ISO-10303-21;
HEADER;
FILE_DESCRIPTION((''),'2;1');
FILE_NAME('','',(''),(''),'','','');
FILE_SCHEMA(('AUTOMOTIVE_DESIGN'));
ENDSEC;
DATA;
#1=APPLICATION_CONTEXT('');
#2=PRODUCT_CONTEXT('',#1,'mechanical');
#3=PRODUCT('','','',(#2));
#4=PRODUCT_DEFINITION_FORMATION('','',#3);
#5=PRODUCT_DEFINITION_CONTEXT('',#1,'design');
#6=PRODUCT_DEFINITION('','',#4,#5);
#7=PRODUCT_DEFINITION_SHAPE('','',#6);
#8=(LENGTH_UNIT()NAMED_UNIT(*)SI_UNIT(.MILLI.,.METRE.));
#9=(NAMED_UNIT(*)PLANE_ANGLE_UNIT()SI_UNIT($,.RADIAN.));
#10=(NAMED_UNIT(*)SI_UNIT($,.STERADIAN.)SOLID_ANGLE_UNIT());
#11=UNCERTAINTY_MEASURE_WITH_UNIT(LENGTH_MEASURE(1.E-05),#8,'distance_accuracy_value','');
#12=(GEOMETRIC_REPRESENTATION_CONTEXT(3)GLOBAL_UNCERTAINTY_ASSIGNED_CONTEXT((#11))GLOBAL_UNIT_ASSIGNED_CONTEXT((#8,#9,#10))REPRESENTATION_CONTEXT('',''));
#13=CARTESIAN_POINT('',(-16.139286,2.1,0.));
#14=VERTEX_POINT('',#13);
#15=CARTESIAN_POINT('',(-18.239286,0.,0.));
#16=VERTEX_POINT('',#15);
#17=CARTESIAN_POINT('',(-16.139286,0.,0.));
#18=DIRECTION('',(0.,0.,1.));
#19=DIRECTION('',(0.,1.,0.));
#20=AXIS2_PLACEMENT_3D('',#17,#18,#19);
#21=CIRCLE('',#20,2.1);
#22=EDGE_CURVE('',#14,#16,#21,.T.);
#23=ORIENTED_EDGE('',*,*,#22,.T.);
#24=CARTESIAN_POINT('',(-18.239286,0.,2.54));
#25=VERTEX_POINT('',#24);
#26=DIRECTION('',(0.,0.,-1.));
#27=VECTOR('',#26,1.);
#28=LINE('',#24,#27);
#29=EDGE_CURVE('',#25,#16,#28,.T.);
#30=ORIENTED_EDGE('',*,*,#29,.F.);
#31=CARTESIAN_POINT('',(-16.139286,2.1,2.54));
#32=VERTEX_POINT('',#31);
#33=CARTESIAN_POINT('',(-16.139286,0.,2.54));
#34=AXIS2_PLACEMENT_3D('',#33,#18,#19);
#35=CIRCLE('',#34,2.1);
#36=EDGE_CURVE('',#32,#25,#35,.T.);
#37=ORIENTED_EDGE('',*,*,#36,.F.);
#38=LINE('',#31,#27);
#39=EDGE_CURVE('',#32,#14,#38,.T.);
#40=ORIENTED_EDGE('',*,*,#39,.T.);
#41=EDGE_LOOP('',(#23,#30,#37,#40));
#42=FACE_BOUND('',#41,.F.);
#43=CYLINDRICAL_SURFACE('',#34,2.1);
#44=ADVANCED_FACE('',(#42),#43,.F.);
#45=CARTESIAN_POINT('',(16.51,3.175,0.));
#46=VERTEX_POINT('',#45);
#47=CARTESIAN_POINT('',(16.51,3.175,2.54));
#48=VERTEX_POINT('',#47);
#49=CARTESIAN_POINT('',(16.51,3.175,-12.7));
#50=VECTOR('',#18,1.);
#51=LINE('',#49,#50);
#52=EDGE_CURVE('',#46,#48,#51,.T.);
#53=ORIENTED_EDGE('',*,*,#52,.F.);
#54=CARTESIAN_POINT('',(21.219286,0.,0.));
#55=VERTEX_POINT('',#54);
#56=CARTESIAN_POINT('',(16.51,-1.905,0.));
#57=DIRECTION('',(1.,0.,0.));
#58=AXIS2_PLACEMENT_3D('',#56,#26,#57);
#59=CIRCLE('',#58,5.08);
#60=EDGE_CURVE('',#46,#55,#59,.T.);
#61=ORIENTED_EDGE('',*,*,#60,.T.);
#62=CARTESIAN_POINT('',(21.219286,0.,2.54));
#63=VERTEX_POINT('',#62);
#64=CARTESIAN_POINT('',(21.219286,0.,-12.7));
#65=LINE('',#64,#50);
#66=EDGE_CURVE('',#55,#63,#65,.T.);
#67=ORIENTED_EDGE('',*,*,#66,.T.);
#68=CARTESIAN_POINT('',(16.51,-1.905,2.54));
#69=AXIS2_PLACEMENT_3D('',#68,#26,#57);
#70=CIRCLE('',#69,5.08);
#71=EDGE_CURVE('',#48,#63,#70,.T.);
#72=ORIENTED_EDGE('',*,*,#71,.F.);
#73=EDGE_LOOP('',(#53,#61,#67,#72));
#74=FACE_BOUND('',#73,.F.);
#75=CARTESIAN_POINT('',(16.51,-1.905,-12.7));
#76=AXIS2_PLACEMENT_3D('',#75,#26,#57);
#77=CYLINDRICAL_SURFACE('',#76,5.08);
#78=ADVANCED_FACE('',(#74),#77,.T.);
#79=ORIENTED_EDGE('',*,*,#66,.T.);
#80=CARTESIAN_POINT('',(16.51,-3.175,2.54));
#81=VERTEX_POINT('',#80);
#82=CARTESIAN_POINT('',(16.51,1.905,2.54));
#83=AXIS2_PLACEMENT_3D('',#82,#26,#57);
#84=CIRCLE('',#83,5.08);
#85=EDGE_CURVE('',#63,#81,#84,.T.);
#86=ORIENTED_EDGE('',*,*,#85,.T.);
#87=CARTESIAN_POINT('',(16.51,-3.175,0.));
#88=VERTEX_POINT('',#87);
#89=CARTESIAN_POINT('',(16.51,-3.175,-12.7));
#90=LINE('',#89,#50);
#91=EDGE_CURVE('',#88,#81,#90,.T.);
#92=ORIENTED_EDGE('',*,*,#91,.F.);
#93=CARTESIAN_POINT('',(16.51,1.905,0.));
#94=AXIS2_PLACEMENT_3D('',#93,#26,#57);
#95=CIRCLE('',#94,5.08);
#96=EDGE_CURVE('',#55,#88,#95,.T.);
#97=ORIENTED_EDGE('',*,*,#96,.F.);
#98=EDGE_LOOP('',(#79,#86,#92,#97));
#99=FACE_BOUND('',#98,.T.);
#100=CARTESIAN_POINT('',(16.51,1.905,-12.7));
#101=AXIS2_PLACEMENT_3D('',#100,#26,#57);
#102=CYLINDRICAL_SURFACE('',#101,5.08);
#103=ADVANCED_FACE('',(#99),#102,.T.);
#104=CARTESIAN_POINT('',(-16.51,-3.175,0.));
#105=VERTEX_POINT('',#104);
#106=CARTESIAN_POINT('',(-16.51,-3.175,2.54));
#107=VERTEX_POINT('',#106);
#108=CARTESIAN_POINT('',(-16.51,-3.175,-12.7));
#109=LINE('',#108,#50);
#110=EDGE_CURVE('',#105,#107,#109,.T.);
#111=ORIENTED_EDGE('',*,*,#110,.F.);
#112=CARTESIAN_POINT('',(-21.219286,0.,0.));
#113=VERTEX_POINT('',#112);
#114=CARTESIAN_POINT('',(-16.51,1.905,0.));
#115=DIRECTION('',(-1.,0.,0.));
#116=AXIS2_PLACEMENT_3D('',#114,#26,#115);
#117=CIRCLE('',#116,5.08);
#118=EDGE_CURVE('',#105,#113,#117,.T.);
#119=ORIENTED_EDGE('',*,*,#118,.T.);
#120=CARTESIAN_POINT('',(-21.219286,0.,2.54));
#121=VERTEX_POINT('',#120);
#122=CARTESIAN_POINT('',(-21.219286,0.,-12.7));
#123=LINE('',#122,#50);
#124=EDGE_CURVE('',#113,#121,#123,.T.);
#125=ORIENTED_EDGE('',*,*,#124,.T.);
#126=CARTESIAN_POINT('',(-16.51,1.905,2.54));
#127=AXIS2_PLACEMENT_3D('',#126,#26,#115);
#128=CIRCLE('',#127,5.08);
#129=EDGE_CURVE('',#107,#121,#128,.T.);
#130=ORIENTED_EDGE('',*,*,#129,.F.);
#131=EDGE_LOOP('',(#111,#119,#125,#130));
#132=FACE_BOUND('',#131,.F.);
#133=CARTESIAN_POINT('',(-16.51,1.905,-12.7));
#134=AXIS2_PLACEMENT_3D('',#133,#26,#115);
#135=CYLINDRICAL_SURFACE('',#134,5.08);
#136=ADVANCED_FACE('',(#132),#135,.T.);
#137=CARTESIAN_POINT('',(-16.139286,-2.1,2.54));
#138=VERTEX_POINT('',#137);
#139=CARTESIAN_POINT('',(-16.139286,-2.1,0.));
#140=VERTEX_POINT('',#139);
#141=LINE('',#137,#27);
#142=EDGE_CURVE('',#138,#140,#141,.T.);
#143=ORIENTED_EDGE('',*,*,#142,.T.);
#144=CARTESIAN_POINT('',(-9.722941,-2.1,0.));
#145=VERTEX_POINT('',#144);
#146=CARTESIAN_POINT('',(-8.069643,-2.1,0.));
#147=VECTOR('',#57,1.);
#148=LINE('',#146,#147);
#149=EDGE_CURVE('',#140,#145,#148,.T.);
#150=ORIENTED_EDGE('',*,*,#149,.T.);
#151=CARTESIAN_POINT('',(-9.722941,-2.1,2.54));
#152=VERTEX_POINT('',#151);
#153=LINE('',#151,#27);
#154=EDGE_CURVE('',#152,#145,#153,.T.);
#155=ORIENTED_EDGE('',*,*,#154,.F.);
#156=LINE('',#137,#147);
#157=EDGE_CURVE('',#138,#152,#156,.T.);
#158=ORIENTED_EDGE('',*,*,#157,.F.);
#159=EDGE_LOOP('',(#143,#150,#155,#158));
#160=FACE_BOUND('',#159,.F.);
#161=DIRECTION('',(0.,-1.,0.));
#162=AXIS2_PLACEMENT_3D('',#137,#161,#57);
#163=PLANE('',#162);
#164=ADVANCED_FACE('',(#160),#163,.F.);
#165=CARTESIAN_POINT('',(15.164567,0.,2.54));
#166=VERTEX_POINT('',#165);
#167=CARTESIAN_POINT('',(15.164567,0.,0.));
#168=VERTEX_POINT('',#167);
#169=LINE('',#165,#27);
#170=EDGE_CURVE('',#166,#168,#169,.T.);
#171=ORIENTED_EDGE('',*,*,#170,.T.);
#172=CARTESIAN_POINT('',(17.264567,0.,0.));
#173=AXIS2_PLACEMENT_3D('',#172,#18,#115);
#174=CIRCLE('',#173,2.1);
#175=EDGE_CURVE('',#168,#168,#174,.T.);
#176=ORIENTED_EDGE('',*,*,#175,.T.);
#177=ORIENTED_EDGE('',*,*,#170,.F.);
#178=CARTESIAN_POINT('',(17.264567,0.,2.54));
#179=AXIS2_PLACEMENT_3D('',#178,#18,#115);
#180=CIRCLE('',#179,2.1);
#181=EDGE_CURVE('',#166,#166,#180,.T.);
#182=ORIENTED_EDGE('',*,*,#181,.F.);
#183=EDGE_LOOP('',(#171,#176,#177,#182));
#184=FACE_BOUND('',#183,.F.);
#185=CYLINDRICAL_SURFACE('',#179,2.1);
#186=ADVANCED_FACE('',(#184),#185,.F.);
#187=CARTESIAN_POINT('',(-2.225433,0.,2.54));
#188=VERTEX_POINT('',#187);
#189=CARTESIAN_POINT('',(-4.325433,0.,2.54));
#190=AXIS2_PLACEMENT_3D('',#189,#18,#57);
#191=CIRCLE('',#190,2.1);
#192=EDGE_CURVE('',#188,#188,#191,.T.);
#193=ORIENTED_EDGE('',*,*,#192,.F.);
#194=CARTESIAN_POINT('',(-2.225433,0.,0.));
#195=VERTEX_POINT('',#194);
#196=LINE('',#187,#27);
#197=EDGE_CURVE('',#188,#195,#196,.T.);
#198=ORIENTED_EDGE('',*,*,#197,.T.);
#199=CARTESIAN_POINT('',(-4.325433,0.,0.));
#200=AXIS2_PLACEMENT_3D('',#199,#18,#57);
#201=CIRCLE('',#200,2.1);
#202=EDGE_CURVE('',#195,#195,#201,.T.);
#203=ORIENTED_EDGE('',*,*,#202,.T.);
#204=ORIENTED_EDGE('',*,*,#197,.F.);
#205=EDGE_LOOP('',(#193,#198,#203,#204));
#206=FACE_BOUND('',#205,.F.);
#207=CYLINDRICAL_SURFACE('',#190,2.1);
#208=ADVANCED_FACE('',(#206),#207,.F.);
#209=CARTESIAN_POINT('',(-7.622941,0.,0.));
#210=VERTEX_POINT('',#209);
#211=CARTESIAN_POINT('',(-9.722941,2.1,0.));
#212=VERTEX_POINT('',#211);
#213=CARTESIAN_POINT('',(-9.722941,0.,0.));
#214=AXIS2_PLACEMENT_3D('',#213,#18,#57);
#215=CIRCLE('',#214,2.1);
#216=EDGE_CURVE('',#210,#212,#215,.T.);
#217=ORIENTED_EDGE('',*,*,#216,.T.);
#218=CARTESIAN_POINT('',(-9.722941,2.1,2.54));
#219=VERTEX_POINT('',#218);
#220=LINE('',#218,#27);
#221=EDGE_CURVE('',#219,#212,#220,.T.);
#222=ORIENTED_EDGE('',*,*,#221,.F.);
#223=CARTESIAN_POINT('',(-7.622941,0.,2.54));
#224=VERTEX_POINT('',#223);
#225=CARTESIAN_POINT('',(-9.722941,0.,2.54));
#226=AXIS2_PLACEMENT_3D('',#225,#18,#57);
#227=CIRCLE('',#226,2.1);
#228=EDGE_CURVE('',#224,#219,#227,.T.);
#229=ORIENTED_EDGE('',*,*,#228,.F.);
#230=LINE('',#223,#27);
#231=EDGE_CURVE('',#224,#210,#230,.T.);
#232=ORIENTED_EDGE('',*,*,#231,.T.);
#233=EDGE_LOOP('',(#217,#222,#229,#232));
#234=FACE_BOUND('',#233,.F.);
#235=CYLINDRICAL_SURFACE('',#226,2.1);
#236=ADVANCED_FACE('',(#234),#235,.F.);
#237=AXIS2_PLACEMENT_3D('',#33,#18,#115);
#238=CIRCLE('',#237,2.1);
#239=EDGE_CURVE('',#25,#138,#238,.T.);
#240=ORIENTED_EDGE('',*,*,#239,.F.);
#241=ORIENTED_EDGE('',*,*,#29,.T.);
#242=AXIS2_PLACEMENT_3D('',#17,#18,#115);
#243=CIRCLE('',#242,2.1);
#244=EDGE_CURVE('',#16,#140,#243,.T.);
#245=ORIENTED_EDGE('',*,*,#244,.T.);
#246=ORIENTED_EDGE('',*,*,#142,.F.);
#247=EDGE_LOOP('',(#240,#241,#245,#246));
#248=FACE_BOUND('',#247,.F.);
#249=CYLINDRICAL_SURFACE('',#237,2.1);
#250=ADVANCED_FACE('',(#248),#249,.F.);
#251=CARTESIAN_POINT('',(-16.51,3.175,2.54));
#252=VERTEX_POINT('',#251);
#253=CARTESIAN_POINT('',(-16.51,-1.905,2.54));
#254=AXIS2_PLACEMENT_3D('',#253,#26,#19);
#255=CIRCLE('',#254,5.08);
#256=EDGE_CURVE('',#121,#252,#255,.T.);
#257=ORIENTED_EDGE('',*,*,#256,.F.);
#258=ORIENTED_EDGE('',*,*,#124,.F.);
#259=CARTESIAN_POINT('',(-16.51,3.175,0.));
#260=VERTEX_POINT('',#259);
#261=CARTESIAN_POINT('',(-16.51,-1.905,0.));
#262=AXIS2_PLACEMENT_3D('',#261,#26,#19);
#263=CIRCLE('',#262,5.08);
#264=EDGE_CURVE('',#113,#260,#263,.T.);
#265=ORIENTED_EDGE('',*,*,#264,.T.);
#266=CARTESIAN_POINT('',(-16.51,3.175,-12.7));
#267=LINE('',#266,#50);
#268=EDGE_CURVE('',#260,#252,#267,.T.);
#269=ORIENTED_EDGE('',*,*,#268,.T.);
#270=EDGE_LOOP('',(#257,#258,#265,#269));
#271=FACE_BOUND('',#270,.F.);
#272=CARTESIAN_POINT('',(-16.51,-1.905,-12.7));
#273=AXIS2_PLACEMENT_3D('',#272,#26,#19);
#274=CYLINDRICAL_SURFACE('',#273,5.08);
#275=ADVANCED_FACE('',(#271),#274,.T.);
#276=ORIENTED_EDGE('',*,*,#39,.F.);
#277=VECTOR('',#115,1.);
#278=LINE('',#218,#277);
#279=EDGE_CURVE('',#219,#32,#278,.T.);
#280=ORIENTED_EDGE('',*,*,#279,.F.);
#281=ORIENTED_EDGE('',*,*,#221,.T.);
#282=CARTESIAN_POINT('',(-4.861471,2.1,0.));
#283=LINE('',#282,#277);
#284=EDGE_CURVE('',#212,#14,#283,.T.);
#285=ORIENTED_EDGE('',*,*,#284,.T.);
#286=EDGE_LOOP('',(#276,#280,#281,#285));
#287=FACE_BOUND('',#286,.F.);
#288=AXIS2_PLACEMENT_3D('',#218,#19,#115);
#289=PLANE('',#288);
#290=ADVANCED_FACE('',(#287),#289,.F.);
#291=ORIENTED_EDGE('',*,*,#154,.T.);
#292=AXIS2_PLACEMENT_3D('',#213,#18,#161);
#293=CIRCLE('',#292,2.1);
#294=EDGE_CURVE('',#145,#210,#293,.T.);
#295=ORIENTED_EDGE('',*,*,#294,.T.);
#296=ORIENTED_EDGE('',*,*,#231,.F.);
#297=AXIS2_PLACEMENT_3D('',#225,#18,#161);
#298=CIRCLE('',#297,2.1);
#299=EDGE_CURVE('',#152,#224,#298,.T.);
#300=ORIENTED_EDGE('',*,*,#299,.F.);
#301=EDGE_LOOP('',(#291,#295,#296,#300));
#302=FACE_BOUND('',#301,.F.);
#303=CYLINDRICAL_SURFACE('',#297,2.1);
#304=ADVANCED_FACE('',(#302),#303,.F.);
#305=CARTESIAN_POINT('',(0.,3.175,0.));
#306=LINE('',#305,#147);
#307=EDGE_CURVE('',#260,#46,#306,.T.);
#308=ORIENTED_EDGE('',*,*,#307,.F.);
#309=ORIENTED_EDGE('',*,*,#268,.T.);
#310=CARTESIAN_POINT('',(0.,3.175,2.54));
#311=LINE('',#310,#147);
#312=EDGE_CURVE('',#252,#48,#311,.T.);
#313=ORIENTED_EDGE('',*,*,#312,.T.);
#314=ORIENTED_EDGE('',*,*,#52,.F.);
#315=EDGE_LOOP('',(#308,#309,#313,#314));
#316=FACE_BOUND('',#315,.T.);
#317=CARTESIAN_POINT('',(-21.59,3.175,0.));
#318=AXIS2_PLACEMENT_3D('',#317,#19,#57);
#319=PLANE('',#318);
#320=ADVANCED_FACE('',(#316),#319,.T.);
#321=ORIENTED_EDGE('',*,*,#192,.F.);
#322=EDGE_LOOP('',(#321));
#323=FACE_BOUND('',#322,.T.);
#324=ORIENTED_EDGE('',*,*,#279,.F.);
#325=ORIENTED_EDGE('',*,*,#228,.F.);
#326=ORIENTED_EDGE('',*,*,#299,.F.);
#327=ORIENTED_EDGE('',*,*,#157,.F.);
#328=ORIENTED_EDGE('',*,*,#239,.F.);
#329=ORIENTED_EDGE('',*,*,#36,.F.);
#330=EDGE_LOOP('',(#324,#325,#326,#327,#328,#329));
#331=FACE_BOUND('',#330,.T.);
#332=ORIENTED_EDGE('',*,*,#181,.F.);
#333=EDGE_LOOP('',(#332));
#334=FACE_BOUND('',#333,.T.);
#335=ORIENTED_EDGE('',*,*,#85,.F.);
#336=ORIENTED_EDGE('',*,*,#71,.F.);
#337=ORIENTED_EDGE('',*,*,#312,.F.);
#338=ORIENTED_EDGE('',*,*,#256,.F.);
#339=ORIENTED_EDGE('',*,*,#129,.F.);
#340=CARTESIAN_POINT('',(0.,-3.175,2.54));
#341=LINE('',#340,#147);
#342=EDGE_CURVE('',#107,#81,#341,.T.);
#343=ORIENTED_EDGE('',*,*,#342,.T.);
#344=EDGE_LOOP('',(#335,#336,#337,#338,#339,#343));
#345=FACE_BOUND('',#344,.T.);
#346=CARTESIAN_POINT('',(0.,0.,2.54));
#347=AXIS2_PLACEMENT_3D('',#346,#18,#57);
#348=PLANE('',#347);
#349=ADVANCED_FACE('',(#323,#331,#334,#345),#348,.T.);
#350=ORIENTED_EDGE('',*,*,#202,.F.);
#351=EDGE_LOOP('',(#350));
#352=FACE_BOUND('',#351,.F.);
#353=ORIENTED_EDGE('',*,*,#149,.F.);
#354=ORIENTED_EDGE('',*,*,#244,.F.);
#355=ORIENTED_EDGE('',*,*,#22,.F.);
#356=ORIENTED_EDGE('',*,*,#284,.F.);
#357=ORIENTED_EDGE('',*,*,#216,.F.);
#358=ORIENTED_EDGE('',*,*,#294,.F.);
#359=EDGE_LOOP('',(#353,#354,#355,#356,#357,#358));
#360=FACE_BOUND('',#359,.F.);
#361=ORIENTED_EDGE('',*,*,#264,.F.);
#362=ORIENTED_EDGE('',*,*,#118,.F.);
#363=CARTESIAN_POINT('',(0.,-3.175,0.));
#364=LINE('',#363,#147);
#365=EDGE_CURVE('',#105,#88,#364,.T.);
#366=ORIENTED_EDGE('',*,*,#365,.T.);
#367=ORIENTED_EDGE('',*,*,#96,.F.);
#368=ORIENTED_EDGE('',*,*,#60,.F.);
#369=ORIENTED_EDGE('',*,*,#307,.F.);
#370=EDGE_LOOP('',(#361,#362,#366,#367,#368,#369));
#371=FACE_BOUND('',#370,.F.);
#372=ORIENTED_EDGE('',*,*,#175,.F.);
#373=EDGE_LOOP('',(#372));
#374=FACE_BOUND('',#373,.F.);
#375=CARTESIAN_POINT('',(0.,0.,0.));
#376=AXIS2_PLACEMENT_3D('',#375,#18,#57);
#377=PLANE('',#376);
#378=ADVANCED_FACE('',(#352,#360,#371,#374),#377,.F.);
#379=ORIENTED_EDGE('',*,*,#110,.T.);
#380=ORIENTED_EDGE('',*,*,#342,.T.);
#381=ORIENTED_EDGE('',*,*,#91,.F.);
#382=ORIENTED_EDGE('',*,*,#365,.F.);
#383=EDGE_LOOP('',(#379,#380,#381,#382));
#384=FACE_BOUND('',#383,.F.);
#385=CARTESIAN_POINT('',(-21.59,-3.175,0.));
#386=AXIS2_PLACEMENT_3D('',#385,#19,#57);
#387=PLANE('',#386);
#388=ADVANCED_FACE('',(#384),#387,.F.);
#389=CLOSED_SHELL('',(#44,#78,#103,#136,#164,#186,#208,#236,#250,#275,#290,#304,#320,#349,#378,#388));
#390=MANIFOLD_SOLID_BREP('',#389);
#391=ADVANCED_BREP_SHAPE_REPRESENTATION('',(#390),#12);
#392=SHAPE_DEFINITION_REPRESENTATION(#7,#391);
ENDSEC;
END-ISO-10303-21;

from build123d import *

# Parameters (mm, degrees)
F0_W        = 43.18
F0_H        = 6.35
F1_DEPTH    = 2.54
F2_T1_DEPTH = 27.94
F4_DEPTH    = 2.541


# Not quite as in the source:
# - a fillet or chamfer that OpenCascade refuses, or shapes differently, is made with other operations: its cross-section is extruded or revolved along the edge and cut away or added


with BuildPart() as f1:
    # F0 (on Top) → F1 (new body)
    with BuildSketch(Plane.XY):
        Rectangle(F0_W, F0_H)
    extrude(amount=F1_DEPTH)

    # F2: fillet of radius 5.08 on 4 edges, made by hand

    # F2_s2 → F2_t1 (cut)
    with BuildSketch(Plane.XY.offset(-12.7)):
        with BuildLine():
            ThreePointArc((21.59, 1.905), (20.1021024484, -1.6871024484), (16.51, -3.175))
            Line((16.51, -3.175), (21.59, -3.175))
            Line((21.59, -3.175), (21.59, 1.905))
        make_face()
        with BuildLine():
            ThreePointArc((21.59, -1.905), (20.1021024484, 1.6871024484), (16.51, 3.175))
            Line((16.51, 3.175), (21.59, 3.175))
            Line((21.59, 3.175), (21.59, -1.905))
        make_face()
        with BuildLine():
            ThreePointArc((-16.51, 3.175), (-20.1021024484, 1.6871024484), (-21.59, -1.905))
            Line((-21.59, -1.905), (-21.59, 3.175))
            Line((-21.59, 3.175), (-16.51, 3.175))
        make_face()
        with BuildLine():
            ThreePointArc((-21.59, 1.905), (-20.1021024484, -1.6871024484), (-16.51, -3.175))
            Line((-16.51, -3.175), (-21.59, -3.175))
            Line((-21.59, -3.175), (-21.59, 1.905))
        make_face()
    extrude(amount=F2_T1_DEPTH, mode=Mode.SUBTRACT)

    # F3 (on face) → F4 (cut, through all)
    with BuildSketch(Plane.XY.offset(2.54)):
        with BuildLine():
            Line((15.1645667607, 0), (19.3645667607, 0))
            ThreePointArc((19.3645667607, 0), (17.2645667607, 2.1), (15.1645667607, 0))
        make_face()
        with BuildLine():
            ThreePointArc((-9.7229412393, -2.1), (-8.2380169988, -1.4849242405), (-7.6229412393, 0))
            Line((-7.6229412393, 0), (-18.2392860393, 0))
            ThreePointArc((-18.2392860393, 0), (-17.6242102798, -1.4849242405), (-16.1392860393, -2.1))
            Line((-16.1392860393, -2.1), (-9.7229412393, -2.1))
        make_face()
        with BuildLine():
            Line((-18.2392860393, 0), (-7.6229412393, 0))
            ThreePointArc((-7.6229412393, 0), (-8.2380169988, 1.4849242405), (-9.7229412393, 2.1))
            Line((-9.7229412393, 2.1), (-16.1392860393, 2.1))
            ThreePointArc((-16.1392860393, 2.1), (-17.6242102798, 1.4849242405), (-18.2392860393, 0))
        make_face()
        with BuildLine():
            ThreePointArc((-6.4254332393, 0), (-4.3254332393, -2.1), (-2.2254332393, 0))
            Line((-2.2254332393, 0), (-6.4254332393, 0))
        make_face()
        with BuildLine():
            Line((-6.4254332393, 0), (-2.2254332393, 0))
            ThreePointArc((-2.2254332393, 0), (-4.3254332393, 2.1), (-6.4254332393, 0))
        make_face()
        with BuildLine():
            ThreePointArc((15.1645667607, 0), (17.2645667607, -2.1), (19.3645667607, 0))
            Line((19.3645667607, 0), (15.1645667607, 0))
        make_face()
    extrude(amount=-F4_DEPTH, mode=Mode.SUBTRACT)


solid = f1.part
